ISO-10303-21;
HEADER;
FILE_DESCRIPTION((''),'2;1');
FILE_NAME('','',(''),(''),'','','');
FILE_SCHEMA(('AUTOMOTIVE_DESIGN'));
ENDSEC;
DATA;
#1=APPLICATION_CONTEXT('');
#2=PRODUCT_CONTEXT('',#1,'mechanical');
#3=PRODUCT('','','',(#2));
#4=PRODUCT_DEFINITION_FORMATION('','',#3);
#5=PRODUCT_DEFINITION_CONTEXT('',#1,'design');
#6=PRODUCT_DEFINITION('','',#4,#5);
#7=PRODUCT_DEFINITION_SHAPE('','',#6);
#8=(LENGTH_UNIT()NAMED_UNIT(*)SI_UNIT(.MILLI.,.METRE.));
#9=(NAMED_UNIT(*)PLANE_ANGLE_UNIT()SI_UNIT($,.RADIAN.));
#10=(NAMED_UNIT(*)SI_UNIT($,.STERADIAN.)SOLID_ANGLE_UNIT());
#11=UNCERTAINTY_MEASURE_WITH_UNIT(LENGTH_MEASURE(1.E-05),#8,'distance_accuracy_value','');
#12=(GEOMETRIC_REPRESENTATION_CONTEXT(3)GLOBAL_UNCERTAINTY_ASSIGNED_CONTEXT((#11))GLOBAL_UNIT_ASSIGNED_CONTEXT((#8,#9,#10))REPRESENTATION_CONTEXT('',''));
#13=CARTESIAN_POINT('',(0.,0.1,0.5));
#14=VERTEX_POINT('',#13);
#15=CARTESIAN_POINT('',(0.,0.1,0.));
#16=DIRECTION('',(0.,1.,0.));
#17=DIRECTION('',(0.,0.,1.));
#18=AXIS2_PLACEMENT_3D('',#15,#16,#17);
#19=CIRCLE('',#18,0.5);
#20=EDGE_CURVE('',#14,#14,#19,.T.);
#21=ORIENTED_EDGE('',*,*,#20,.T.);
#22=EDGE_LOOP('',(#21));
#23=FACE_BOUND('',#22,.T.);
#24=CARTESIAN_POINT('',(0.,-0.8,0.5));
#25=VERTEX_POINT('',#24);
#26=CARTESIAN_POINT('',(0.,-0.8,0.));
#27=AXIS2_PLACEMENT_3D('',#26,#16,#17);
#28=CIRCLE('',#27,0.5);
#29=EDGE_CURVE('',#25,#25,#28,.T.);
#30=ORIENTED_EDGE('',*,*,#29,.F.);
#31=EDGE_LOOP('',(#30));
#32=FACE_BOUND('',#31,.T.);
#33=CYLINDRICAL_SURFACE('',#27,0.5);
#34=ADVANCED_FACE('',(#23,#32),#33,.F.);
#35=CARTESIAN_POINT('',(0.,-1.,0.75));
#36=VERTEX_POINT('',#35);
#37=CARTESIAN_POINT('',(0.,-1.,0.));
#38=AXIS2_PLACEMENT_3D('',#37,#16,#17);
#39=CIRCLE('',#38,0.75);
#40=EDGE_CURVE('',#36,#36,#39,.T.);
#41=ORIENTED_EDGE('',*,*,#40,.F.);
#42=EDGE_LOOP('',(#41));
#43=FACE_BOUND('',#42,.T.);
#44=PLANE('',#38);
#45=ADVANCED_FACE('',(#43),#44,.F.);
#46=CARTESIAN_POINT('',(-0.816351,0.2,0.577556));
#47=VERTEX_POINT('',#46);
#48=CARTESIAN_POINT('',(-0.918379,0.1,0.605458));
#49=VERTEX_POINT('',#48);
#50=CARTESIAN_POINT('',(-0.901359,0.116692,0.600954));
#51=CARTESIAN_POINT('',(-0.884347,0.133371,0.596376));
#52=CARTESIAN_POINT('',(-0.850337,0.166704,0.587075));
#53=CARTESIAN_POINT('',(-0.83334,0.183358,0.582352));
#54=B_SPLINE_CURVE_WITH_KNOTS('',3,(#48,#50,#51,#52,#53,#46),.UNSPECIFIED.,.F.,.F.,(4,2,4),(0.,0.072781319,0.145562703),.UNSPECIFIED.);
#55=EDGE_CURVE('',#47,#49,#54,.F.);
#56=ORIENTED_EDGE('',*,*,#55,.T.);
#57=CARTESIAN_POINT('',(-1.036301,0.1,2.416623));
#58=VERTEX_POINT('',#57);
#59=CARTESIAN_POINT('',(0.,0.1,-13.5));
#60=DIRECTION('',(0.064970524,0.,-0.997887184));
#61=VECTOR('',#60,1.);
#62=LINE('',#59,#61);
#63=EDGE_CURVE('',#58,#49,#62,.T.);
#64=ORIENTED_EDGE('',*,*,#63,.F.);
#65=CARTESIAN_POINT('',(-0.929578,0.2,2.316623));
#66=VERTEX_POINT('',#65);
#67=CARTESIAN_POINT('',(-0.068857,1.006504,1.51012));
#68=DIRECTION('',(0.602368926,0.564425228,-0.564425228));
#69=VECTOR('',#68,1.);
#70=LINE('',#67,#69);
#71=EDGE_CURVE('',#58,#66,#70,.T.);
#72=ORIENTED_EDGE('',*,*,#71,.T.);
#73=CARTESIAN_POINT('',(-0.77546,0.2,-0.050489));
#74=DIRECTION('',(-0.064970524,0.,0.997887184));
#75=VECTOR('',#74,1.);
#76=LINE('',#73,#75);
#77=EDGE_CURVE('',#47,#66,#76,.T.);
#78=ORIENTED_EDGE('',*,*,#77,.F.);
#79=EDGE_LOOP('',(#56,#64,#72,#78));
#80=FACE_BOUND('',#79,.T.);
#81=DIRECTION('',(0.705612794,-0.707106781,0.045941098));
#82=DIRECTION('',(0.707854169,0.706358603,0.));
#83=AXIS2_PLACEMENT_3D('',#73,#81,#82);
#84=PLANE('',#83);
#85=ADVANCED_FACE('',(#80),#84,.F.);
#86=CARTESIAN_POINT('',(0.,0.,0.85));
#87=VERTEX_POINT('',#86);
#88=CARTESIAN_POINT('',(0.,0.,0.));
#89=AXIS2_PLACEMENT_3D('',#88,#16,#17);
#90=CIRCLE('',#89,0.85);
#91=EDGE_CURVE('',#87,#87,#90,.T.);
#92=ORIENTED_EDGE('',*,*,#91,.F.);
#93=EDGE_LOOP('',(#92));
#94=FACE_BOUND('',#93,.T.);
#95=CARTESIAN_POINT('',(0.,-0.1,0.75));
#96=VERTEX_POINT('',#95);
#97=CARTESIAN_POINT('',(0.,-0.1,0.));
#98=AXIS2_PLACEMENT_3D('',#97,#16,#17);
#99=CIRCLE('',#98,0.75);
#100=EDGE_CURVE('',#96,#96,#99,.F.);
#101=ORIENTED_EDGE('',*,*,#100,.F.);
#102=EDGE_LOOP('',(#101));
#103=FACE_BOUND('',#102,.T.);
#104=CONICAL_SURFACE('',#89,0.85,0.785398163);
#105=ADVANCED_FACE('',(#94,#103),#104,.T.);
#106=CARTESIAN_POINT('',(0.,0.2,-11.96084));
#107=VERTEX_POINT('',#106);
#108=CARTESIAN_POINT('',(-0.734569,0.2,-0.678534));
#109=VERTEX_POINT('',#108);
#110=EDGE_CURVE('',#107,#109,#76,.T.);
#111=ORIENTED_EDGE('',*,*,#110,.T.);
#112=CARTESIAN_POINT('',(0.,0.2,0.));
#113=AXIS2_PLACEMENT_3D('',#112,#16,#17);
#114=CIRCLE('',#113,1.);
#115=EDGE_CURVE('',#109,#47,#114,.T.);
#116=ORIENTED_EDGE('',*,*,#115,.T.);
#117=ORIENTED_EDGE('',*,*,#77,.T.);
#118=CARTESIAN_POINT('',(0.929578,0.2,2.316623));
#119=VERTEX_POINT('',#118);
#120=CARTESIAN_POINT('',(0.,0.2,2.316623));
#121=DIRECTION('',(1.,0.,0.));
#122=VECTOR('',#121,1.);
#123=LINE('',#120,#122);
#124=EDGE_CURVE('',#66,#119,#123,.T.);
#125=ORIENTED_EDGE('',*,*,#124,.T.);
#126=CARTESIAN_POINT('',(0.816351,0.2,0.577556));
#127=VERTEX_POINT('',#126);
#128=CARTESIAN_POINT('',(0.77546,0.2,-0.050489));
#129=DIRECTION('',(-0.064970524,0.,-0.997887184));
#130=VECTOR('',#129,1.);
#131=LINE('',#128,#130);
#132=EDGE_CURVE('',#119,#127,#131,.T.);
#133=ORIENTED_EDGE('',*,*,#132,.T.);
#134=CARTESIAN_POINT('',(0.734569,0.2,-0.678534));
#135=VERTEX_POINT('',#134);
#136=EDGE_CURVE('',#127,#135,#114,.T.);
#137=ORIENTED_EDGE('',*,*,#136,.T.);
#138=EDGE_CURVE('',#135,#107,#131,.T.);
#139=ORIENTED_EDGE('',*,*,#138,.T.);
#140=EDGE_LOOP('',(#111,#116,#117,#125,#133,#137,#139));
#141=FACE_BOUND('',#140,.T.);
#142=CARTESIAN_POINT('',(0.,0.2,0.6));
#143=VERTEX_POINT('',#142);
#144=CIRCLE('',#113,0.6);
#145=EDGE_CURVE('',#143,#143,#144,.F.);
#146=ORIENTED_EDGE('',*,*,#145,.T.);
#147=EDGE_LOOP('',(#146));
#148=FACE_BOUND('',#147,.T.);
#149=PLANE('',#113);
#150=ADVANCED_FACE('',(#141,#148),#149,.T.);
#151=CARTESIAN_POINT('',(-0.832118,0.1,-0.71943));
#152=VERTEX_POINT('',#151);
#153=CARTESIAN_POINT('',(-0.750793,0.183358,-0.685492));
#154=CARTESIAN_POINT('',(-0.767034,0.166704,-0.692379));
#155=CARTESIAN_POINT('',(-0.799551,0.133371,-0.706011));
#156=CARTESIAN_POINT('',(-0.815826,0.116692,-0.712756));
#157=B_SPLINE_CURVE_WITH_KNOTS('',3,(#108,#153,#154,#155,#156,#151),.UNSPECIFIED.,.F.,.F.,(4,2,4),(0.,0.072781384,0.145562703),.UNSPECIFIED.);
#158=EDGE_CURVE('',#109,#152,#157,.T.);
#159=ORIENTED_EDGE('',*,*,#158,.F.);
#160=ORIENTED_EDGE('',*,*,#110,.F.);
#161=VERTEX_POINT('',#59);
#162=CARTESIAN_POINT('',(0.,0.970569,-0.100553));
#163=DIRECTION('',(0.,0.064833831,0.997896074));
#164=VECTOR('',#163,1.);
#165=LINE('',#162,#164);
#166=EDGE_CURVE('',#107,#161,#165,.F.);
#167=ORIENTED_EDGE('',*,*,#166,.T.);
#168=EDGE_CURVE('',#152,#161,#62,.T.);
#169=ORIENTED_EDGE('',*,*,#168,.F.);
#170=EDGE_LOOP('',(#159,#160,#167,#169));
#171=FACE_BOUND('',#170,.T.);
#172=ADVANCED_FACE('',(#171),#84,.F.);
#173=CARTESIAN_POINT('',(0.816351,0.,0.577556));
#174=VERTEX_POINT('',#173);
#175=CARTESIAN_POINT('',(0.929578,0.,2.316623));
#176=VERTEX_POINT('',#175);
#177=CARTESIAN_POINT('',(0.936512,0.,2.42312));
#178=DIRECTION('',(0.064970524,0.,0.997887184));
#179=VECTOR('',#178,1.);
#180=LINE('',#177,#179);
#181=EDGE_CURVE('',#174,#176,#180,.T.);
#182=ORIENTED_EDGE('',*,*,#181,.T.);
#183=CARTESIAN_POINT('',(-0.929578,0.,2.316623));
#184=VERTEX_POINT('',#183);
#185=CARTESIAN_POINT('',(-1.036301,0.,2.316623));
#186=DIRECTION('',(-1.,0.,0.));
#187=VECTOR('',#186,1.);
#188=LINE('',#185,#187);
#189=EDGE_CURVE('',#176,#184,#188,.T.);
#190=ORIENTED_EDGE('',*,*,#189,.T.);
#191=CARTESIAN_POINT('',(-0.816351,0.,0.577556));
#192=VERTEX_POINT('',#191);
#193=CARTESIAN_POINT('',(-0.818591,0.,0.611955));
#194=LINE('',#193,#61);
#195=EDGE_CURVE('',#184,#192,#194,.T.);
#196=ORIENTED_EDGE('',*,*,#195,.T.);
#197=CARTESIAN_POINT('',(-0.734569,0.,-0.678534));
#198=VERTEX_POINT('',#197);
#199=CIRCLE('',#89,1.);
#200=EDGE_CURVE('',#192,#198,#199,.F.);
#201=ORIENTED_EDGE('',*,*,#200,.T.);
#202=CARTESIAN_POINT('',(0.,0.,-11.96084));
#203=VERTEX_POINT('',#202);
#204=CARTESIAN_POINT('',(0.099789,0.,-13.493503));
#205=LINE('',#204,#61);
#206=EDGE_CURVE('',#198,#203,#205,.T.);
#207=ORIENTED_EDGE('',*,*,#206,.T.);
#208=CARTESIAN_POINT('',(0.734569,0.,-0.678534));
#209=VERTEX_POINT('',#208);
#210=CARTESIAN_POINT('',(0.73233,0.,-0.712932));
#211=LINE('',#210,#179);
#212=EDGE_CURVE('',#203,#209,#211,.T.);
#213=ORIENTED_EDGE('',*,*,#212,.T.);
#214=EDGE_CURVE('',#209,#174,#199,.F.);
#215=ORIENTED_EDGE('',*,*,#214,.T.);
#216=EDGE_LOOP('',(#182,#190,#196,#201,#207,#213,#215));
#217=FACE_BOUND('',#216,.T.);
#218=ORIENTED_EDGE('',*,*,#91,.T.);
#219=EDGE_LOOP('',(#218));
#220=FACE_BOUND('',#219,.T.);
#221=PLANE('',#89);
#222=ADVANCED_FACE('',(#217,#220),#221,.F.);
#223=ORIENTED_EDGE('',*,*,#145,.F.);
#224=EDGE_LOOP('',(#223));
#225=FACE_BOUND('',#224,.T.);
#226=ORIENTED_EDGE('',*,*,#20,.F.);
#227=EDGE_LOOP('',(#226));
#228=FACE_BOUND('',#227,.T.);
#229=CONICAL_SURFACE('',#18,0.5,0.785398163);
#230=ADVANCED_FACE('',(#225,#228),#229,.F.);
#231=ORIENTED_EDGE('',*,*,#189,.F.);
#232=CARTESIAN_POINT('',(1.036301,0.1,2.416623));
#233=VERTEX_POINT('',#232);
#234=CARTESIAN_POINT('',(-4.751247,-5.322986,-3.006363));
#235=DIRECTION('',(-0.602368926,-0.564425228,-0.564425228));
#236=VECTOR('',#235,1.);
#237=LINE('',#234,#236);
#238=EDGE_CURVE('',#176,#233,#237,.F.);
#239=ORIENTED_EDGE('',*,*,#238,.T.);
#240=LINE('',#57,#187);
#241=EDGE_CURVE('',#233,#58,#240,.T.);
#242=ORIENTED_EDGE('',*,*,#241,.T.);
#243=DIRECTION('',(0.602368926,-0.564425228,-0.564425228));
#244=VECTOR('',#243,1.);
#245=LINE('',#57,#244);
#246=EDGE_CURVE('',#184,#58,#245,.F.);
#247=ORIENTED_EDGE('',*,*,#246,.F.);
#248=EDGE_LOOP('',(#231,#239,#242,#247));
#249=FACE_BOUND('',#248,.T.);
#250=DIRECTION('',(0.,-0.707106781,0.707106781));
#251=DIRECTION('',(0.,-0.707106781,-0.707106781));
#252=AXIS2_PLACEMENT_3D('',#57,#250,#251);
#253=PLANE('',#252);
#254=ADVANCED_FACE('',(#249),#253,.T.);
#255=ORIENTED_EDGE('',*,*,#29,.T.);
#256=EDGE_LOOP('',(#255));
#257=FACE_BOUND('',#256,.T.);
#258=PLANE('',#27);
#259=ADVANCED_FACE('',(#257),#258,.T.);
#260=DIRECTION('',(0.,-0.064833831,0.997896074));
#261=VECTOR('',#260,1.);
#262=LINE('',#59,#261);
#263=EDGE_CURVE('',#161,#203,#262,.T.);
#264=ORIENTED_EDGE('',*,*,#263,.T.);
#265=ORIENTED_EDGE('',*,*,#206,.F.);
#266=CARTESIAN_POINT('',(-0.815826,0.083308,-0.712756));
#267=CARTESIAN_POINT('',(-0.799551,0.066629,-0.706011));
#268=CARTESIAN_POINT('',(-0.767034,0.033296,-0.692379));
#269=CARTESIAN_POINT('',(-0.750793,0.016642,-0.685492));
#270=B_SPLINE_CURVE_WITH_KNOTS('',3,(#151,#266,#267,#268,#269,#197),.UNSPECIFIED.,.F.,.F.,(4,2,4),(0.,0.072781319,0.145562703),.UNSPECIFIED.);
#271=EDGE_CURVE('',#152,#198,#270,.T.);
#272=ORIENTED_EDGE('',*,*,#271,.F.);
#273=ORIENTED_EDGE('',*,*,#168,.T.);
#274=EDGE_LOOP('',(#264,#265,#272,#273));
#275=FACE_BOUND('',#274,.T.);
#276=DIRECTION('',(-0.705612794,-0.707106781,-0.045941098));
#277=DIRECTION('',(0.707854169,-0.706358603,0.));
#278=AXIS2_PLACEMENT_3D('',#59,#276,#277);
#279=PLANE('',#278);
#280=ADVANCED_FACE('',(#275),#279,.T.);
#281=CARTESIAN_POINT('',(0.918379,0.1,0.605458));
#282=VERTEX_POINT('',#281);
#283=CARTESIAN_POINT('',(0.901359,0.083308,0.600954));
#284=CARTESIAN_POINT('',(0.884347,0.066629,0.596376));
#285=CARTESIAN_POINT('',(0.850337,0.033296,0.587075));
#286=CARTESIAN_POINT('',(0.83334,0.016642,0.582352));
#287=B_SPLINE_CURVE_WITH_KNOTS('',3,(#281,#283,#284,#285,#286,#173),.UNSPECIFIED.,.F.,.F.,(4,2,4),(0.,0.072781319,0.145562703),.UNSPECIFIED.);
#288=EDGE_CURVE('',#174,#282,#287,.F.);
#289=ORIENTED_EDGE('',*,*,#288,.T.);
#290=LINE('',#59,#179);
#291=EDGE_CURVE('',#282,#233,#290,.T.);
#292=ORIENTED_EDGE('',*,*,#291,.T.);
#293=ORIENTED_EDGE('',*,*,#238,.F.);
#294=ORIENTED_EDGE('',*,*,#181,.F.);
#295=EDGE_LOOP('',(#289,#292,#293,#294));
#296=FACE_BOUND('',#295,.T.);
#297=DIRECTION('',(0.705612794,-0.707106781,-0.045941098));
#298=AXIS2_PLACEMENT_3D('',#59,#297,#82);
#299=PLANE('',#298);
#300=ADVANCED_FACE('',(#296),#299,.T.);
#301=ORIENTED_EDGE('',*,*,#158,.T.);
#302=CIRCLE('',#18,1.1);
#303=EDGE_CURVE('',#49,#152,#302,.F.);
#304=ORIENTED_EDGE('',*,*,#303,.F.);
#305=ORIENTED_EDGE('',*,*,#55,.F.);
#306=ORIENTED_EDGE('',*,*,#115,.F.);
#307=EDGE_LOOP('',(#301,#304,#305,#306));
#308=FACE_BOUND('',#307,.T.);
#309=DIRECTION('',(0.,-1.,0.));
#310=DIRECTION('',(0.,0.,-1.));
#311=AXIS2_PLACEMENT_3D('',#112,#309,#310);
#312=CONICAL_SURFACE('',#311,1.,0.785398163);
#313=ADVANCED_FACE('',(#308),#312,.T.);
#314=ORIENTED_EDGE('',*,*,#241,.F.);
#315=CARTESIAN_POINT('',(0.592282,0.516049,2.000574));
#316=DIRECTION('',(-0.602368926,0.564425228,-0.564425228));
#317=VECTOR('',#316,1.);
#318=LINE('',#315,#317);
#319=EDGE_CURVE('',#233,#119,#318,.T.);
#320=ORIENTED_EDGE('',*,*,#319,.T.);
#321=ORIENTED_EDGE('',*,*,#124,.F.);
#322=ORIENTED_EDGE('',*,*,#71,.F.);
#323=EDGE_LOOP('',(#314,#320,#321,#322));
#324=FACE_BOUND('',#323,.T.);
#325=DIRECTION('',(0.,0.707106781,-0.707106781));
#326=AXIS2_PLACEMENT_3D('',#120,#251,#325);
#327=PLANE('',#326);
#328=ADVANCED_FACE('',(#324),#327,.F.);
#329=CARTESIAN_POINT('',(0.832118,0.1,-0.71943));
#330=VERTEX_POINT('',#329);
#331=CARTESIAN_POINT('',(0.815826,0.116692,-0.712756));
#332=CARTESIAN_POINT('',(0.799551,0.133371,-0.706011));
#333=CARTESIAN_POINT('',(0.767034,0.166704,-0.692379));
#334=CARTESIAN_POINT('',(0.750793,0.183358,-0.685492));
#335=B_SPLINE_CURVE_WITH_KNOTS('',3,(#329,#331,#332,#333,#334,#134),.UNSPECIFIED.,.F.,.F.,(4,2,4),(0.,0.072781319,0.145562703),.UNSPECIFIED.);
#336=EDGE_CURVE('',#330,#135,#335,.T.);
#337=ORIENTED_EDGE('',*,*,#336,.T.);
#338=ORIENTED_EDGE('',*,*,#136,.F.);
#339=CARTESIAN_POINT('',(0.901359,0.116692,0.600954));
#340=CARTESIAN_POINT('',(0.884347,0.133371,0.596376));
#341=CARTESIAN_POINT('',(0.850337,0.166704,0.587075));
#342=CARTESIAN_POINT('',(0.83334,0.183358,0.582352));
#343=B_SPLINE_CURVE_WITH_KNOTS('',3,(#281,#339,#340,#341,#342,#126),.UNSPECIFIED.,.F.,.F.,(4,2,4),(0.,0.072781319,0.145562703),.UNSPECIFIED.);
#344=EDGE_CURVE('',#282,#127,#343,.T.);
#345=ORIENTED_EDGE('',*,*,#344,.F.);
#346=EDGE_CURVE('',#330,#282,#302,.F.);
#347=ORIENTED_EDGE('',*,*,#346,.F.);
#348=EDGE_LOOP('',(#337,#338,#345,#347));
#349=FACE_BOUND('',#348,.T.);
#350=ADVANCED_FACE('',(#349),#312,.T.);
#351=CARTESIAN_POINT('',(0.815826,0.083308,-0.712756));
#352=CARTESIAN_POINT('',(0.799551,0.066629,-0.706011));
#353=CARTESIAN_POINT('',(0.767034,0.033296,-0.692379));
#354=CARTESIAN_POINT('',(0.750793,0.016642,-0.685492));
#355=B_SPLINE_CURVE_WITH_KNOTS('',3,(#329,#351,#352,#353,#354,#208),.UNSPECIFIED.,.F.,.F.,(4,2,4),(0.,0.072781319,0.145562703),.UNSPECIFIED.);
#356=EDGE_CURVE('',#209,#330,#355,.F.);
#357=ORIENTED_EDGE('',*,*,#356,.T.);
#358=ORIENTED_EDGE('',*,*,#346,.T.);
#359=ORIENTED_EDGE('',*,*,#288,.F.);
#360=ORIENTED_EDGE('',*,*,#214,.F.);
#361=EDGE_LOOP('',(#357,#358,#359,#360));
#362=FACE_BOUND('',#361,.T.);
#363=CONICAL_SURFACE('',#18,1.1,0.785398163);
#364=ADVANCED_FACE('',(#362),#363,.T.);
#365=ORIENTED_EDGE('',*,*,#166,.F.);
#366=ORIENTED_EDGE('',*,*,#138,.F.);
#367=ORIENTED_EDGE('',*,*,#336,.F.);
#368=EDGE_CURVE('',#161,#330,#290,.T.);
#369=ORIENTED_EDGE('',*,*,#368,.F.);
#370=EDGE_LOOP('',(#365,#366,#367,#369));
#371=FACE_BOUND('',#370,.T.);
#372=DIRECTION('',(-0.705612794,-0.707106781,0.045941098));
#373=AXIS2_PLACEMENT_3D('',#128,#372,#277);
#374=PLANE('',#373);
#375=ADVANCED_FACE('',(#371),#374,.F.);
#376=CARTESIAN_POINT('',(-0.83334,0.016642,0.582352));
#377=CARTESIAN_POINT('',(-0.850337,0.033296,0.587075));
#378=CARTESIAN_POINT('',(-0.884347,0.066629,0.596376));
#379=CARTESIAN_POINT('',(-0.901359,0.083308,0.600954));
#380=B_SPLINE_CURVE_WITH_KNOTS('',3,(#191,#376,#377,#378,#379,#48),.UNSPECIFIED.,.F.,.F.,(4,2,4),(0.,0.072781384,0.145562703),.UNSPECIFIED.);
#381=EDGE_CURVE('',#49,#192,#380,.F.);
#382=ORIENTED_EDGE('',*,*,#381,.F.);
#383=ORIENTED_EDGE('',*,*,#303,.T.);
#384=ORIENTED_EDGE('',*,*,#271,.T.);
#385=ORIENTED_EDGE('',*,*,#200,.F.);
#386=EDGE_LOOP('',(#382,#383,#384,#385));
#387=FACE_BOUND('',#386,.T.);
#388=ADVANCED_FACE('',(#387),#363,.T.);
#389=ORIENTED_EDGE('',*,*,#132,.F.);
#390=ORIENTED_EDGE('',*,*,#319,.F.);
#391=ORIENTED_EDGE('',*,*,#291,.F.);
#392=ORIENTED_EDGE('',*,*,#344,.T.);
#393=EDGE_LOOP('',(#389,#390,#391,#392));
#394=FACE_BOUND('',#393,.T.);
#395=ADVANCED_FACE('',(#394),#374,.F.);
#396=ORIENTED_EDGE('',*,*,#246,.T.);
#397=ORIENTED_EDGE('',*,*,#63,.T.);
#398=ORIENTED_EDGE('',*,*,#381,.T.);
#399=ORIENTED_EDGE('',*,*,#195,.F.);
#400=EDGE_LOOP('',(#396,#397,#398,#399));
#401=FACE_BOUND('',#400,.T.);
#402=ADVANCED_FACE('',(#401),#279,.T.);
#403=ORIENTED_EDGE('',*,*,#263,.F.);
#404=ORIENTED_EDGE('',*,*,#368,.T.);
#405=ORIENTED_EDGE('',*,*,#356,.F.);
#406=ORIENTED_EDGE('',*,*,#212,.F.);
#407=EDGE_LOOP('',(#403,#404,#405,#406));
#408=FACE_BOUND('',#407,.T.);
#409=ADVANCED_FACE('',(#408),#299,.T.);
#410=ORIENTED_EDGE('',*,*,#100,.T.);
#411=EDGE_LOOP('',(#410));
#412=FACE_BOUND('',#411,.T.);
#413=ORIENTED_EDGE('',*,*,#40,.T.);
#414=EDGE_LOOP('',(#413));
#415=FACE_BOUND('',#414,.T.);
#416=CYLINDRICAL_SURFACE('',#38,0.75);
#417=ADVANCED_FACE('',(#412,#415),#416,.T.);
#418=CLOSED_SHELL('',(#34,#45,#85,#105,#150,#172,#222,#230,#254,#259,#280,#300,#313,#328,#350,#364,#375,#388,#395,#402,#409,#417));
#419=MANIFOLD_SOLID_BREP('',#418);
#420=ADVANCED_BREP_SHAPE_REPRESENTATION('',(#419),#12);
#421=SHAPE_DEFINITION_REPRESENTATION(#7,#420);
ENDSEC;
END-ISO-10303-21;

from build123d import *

# Parameters (mm, degrees)
SKETCH2_R           = 0.75
BOSS_EXTRUDE1_DEPTH = 1
SKETCH3_R           = 1.1
BOSS_EXTRUDE2_DEPTH = 0.2
BOSS_EXTRUDE3_DEPTH = 0.2
SKETCH5_R           = 0.5
CUT_EXTRUDE1_DEPTH  = 1
CHAMFER1_SIZE       = 0.1


with BuildPart() as part:
    # Sketch2 → Boss-Extrude1 (new body)
    with BuildSketch(Plane(origin=(0, 0, 0), x_dir=(1, 0, 0), z_dir=(0, 1, 0))):
        with Locations(Location((0, 0, 0), (0, 0, 270))):
            Circle(SKETCH2_R)
    extrude(amount=-BOSS_EXTRUDE1_DEPTH)

    # Sketch3 → Boss-Extrude2 (add)
    with BuildSketch(Plane(origin=(0, 0, 0), x_dir=(1, 0, 0), z_dir=(0, 1, 0))):
        with Locations(Location((0, 0, 0), (0, 0, 270))):
            Circle(SKETCH3_R)
    extrude(amount=BOSS_EXTRUDE2_DEPTH)

    # Sketch4 → Boss-Extrude3 (add)
    with BuildSketch(Plane(origin=(0, 0.2, 0), x_dir=(1, 0, 0), z_dir=(0, 1, 0))):
        Polygon((0, 13.5), (-1.036300873, -2.416623366), (1.036300873, -2.416623366), align=None)
    extrude(amount=-BOSS_EXTRUDE3_DEPTH)

    # Sketch5 → Cut-Extrude1 (cut)
    with BuildSketch(Plane(origin=(0, 0.2, 0), x_dir=(1, 0, 0), z_dir=(0, 1, 0))):
        with Locations(Location((0, 0, 0), (0, 0, 270))):
            Circle(SKETCH5_R)
    extrude(amount=-CUT_EXTRUDE1_DEPTH, mode=Mode.SUBTRACT)

    # Chamfer1
    chamfer1_edges = [part.edges().sort_by_distance(p)[0] for p in [
        (0.416059237, 0, -7.109714764),
    ]]
    chamfer(chamfer1_edges, length=CHAMFER1_SIZE)
    chamfer1_2_edges = [part.edges().sort_by_distance(p)[0] for p in [
        (-0.441112169, 0, -6.724924886),
    ]]
    chamfer(chamfer1_2_edges, length=CHAMFER1_SIZE)
    chamfer1_3_edges = [part.edges().sort_by_distance(p)[0] for p in [
        (0.416059237, 0.2, -7.109714764),
    ]]
    chamfer(chamfer1_3_edges, length=CHAMFER1_SIZE - 0.0001)  # a hair under: the kernel refuses the full size
    chamfer1_4_edges = [part.edges().sort_by_distance(p)[0] for p in [
        (-0.441087116, 0.2, -6.725309676),
    ]]
    chamfer(chamfer1_4_edges, length=CHAMFER1_SIZE - 0.0001)  # a hair under: the kernel refuses the full size
    chamfer1_5_edges = [part.edges().sort_by_distance(p)[0] for p in [
        (0, 0, -0.75),
    ]]
    chamfer(chamfer1_5_edges, length=CHAMFER1_SIZE)
    chamfer1_6_edges = [part.edges().sort_by_distance(p)[0] for p in [
        (0, 0.2, -0.5),
    ]]
    chamfer(chamfer1_6_edges, length=CHAMFER1_SIZE)
    chamfer1_7_edges = [part.edges().sort_by_distance(p)[0] for p in [
        (0, 0, 2.416623366),
    ]]
    chamfer(chamfer1_7_edges, length=CHAMFER1_SIZE)
    chamfer1_8_edges = [part.edges().sort_by_distance(p)[0] for p in [
        (0, 0.2, 2.416623366),
    ]]
    chamfer(chamfer1_8_edges, length=CHAMFER1_SIZE - 0.0001)  # a hair under: the kernel refuses the full size
    chamfer1_9_edges = [part.edges().sort_by_distance(p)[0] for p in [
        (0.974084713, 0, 1.461040666),
    ]]
    chamfer(chamfer1_9_edges, length=CHAMFER1_SIZE)
    chamfer1_10_edges = [part.edges().sort_by_distance(p)[0] for p in [
        (0.974087969, 0.2, 1.461090666),
    ]]
    chamfer(chamfer1_10_edges, length=CHAMFER1_SIZE - 0.0001)  # a hair under: the kernel refuses the full size
    chamfer1_11_edges = [part.edges().sort_by_distance(p)[0] for p in [
        (-0.974084713, 0, 1.461040666),
    ]]
    chamfer(chamfer1_11_edges, length=CHAMFER1_SIZE)
    chamfer1_12_edges = [part.edges().sort_by_distance(p)[0] for p in [
        (-0.974087969, 0.2, 1.461090666),
    ]]
    chamfer(chamfer1_12_edges, length=CHAMFER1_SIZE - 0.0001)  # a hair under: the kernel refuses the full size
    chamfer1_13_edges = [part.edges().sort_by_distance(p)[0] for p in [
        (1.097675902, 0, -0.071467576),
    ]]
    chamfer(chamfer1_13_edges, length=CHAMFER1_SIZE)
    chamfer1_14_edges = [part.edges().sort_by_distance(p)[0] for p in [
        (1.097675902, 0.2, -0.071467576),
    ]]
    chamfer(chamfer1_14_edges, length=CHAMFER1_SIZE - 0.0001)  # a hair under: the kernel refuses the full size
    chamfer1_15_edges = [part.edges().sort_by_distance(p)[0] for p in [
        (-1.097675902, 0, -0.071467576),
    ]]
    chamfer(chamfer1_15_edges, length=CHAMFER1_SIZE - 0.0001)  # a hair under: the kernel refuses the full size
    chamfer1_16_edges = [part.edges().sort_by_distance(p)[0] for p in [
        (-1.097675902, 0.2, -0.071467576),
    ]]
    chamfer(chamfer1_16_edges, length=CHAMFER1_SIZE - 0.0004)  # a hair under: the kernel refuses the full size


solid = part.part
